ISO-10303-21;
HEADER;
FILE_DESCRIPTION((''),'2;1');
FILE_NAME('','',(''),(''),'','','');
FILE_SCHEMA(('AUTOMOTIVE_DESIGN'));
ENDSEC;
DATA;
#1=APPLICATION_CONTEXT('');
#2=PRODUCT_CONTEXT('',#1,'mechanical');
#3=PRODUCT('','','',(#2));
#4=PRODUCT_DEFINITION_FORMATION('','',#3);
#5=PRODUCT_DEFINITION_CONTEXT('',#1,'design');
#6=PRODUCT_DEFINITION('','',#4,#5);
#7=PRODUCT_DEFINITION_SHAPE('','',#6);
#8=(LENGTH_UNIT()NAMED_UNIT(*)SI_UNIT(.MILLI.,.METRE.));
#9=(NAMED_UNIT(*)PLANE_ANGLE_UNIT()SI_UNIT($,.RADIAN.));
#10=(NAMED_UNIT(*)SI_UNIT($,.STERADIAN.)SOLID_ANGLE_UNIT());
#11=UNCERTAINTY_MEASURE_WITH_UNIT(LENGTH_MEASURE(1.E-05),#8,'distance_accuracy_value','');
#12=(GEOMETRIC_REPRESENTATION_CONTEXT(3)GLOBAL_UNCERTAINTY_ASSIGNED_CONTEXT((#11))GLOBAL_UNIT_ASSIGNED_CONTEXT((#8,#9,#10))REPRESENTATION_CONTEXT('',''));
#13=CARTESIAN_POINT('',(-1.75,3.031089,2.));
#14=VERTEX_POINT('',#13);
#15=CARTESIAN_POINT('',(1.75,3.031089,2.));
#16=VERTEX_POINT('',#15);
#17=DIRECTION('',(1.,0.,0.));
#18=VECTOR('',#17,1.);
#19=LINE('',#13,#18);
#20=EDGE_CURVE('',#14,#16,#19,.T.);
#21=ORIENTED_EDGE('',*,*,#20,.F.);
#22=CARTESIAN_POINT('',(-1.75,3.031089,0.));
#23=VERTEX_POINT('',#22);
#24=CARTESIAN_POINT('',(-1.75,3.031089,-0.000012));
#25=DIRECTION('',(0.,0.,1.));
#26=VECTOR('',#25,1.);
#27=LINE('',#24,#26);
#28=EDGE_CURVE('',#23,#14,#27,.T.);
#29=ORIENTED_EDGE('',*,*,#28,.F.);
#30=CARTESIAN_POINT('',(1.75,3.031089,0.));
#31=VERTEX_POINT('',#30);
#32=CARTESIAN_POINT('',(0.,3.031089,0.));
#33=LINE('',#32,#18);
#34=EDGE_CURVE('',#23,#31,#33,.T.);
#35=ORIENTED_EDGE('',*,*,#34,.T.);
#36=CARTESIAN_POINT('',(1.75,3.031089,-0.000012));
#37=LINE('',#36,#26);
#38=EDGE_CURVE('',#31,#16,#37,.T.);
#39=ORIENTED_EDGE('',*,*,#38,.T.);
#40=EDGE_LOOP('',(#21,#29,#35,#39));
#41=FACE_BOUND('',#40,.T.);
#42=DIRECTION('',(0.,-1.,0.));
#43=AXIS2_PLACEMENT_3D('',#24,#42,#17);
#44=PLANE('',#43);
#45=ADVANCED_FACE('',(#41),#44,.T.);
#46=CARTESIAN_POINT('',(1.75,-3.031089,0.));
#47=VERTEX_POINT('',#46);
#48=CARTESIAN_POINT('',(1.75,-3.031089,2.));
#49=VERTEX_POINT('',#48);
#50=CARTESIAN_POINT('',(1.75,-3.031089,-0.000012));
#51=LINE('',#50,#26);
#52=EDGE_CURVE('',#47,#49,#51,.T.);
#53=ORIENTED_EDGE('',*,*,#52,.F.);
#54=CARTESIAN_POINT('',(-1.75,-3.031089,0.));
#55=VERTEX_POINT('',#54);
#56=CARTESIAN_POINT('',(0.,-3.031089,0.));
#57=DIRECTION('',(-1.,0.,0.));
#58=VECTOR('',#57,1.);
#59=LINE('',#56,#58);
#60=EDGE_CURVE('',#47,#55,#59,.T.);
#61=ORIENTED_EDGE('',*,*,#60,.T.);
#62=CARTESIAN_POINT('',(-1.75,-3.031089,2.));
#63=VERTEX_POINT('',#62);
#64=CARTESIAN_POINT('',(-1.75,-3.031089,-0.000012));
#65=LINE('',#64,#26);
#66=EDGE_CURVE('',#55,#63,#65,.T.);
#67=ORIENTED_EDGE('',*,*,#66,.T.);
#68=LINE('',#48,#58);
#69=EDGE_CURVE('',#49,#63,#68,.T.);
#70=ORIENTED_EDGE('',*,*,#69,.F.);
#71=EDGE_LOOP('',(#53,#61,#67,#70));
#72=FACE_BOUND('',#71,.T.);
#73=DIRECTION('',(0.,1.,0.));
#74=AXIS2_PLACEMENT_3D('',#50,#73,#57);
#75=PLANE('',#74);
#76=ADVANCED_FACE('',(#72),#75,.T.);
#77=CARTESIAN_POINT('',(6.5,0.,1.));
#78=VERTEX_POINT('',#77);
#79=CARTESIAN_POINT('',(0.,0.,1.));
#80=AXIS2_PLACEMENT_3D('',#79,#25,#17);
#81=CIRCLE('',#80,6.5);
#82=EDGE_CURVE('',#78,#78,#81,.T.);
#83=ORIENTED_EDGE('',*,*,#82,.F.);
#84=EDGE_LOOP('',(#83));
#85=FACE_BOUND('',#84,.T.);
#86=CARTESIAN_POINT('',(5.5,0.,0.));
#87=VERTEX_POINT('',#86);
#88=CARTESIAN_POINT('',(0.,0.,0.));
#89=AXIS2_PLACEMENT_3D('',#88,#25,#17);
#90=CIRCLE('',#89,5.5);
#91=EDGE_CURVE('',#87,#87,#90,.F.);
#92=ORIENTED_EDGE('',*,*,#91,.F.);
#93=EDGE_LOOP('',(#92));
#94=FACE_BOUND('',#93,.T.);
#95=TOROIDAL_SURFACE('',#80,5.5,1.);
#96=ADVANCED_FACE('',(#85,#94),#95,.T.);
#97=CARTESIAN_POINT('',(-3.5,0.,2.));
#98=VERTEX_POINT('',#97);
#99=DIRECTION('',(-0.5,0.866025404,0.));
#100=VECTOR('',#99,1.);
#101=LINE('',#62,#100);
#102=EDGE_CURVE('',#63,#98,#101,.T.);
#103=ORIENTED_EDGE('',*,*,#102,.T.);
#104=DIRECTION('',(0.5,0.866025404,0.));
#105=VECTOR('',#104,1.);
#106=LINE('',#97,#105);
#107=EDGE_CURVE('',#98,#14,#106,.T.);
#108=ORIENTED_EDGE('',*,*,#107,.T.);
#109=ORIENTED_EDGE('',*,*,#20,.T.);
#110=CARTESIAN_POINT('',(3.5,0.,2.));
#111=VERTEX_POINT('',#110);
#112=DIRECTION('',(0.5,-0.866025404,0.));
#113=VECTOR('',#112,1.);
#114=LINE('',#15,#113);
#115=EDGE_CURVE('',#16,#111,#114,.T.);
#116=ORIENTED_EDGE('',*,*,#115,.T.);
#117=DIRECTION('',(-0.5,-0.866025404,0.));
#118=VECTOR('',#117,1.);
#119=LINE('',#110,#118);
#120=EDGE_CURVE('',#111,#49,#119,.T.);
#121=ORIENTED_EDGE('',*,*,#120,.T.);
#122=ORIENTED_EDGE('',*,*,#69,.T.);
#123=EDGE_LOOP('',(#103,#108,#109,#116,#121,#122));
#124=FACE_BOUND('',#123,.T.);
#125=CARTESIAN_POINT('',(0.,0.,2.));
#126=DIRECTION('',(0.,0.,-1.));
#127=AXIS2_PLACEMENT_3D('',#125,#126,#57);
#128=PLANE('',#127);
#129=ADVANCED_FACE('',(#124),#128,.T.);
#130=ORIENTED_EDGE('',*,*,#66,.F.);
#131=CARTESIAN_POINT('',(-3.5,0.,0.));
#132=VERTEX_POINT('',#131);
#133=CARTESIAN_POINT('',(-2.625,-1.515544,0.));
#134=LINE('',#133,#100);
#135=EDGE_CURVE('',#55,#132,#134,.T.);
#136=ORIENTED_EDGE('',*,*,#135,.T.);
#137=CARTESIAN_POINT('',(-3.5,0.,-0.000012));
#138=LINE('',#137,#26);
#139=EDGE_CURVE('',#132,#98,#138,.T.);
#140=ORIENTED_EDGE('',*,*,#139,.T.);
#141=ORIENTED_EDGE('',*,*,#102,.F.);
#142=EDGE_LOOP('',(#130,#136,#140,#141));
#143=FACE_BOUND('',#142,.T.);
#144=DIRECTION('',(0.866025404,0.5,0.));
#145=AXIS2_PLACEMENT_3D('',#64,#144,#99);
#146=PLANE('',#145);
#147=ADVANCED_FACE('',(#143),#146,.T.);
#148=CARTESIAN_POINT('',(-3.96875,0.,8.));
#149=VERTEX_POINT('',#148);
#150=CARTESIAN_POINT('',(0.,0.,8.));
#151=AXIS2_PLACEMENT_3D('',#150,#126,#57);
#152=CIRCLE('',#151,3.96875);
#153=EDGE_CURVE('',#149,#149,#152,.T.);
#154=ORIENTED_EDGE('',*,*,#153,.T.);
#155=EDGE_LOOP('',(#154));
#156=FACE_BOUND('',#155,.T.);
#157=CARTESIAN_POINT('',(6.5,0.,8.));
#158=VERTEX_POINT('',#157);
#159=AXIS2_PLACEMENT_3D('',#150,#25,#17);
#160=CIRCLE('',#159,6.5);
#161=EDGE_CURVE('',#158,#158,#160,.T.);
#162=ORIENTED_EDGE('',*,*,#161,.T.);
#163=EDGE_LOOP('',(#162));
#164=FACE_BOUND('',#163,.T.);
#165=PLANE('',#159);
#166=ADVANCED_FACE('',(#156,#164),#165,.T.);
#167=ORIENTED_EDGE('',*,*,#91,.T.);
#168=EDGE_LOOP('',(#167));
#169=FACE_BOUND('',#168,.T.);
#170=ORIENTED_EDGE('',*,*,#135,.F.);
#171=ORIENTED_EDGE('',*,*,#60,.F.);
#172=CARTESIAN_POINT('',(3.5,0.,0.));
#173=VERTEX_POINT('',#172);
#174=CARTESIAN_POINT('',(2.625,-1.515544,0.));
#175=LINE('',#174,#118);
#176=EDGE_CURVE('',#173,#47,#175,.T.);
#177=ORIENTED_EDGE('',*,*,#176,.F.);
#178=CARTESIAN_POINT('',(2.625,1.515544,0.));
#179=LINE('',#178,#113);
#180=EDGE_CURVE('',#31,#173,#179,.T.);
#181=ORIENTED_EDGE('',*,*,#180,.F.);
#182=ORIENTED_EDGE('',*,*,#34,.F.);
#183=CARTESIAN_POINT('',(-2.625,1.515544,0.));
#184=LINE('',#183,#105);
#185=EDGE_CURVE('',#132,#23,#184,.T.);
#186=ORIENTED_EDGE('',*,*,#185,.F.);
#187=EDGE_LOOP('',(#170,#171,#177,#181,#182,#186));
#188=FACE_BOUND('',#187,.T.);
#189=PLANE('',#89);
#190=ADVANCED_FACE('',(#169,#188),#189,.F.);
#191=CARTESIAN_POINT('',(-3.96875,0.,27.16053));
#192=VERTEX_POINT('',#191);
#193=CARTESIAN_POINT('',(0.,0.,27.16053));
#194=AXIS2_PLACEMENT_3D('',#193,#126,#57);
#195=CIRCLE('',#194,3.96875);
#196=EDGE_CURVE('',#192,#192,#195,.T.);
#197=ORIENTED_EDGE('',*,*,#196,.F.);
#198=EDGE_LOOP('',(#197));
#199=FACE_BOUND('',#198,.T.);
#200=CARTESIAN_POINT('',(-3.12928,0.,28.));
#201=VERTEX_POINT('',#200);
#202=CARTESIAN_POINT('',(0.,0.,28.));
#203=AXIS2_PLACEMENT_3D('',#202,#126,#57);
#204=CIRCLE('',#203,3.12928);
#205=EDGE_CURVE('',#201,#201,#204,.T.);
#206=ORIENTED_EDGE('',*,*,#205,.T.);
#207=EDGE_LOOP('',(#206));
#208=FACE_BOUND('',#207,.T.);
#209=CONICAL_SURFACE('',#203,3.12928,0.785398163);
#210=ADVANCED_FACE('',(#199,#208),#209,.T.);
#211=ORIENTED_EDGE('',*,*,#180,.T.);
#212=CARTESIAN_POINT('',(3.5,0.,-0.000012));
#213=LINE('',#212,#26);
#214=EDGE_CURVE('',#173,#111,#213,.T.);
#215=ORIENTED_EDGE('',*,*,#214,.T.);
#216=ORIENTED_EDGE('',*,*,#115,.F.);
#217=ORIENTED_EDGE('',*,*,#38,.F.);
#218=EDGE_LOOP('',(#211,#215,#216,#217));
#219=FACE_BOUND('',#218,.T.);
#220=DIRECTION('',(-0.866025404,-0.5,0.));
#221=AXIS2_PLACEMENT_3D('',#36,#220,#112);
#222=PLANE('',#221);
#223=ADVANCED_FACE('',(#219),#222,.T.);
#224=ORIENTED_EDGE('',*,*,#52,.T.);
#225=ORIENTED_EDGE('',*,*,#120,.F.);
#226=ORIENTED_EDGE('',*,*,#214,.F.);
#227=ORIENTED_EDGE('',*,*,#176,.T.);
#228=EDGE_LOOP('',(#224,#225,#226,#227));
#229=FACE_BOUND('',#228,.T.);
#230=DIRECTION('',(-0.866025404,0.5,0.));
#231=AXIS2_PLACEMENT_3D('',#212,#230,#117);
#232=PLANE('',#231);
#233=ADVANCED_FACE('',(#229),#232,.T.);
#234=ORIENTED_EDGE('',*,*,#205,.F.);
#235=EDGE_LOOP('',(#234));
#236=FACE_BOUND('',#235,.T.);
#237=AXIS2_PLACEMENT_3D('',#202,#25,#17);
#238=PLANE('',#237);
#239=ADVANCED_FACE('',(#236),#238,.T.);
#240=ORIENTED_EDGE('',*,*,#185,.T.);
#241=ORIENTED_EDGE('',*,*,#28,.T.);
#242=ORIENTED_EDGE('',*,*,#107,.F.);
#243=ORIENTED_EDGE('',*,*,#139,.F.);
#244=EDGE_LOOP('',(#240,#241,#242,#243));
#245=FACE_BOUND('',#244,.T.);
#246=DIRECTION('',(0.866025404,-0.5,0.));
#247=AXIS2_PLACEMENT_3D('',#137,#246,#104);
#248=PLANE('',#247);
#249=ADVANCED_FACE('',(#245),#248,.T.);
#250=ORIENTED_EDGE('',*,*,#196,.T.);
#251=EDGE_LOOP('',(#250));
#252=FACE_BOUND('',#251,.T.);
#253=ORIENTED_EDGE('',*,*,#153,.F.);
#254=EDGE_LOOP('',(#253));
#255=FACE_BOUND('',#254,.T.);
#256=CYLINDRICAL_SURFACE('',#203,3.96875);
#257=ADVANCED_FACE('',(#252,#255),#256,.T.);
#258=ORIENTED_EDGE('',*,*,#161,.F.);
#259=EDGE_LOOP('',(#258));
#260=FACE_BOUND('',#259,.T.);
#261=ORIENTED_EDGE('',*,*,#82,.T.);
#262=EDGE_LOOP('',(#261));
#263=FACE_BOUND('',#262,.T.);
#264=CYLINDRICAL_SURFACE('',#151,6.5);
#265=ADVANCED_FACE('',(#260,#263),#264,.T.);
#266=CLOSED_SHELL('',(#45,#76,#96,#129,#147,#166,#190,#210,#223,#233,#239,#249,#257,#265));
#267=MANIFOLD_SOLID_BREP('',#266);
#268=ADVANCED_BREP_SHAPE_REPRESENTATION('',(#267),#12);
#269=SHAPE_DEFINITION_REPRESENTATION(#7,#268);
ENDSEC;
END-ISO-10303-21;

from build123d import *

# Parameters (mm, degrees)
SKETCH_1_R               = 6.5
EXTRUDE_1_DEPTH          = 8
SKETCH_2_R               = 4
EXTRUDE_2_DEPTH          = 20
FILLET_1_R               = 1
CUT_EXTRUDE_1_DEPTH      = 30.470324079
CUT_EXTRUDE_1_DEPTH_BACK = 2


# Read off the part's stored shape, not the designer's step: 5/16-18 机械螺纹 螺柱1
with BuildPart() as part:
    # 草图1 → 凸台-拉伸1 (new body)
    with BuildSketch(Plane.XY):
        Circle(SKETCH_1_R)
    extrude(amount=EXTRUDE_1_DEPTH)

    # 草图2 → 凸台-拉伸2 (add)
    with BuildSketch(Plane.XY.offset(8)):
        Circle(SKETCH_2_R)
    extrude(amount=EXTRUDE_2_DEPTH)

    # 5/16-18 机械螺纹 螺柱1 outline → 5/16-18 机械螺纹 螺柱1 (revolve, cut)
    with BuildSketch(Plane.XZ):
        Polygon((4, 28), (3.12928, 28), (3.96875, 27.16053), (3.96875, 8), (4, 8), align=None)
    revolve(axis=Axis((0, 0, 0), (0, 0, 1)), mode=Mode.SUBTRACT)

    # 圆角1
    fillet_1_edges = [part.edges().sort_by_distance(p)[0] for p in [
        (-6.5, 0, 0),
    ]]
    fillet(fillet_1_edges, radius=FILLET_1_R)

    # 草图4 → 切除-拉伸1 (cut, two sides: drawn at the far end of the back side and taken through both)
    with BuildSketch(Plane(origin=(0, 0, 0), x_dir=(-1, 0, 0), z_dir=(0, 0, -1)).offset(-CUT_EXTRUDE_1_DEPTH_BACK)):
        Polygon((3.5, 0), (1.75, 3.031088913), (-1.75, 3.031088913), (-3.5, 0), (-1.75, -3.031088913), (1.75, -3.031088913), align=None)
    extrude(amount=CUT_EXTRUDE_1_DEPTH + CUT_EXTRUDE_1_DEPTH_BACK, mode=Mode.SUBTRACT)


solid = part.part
